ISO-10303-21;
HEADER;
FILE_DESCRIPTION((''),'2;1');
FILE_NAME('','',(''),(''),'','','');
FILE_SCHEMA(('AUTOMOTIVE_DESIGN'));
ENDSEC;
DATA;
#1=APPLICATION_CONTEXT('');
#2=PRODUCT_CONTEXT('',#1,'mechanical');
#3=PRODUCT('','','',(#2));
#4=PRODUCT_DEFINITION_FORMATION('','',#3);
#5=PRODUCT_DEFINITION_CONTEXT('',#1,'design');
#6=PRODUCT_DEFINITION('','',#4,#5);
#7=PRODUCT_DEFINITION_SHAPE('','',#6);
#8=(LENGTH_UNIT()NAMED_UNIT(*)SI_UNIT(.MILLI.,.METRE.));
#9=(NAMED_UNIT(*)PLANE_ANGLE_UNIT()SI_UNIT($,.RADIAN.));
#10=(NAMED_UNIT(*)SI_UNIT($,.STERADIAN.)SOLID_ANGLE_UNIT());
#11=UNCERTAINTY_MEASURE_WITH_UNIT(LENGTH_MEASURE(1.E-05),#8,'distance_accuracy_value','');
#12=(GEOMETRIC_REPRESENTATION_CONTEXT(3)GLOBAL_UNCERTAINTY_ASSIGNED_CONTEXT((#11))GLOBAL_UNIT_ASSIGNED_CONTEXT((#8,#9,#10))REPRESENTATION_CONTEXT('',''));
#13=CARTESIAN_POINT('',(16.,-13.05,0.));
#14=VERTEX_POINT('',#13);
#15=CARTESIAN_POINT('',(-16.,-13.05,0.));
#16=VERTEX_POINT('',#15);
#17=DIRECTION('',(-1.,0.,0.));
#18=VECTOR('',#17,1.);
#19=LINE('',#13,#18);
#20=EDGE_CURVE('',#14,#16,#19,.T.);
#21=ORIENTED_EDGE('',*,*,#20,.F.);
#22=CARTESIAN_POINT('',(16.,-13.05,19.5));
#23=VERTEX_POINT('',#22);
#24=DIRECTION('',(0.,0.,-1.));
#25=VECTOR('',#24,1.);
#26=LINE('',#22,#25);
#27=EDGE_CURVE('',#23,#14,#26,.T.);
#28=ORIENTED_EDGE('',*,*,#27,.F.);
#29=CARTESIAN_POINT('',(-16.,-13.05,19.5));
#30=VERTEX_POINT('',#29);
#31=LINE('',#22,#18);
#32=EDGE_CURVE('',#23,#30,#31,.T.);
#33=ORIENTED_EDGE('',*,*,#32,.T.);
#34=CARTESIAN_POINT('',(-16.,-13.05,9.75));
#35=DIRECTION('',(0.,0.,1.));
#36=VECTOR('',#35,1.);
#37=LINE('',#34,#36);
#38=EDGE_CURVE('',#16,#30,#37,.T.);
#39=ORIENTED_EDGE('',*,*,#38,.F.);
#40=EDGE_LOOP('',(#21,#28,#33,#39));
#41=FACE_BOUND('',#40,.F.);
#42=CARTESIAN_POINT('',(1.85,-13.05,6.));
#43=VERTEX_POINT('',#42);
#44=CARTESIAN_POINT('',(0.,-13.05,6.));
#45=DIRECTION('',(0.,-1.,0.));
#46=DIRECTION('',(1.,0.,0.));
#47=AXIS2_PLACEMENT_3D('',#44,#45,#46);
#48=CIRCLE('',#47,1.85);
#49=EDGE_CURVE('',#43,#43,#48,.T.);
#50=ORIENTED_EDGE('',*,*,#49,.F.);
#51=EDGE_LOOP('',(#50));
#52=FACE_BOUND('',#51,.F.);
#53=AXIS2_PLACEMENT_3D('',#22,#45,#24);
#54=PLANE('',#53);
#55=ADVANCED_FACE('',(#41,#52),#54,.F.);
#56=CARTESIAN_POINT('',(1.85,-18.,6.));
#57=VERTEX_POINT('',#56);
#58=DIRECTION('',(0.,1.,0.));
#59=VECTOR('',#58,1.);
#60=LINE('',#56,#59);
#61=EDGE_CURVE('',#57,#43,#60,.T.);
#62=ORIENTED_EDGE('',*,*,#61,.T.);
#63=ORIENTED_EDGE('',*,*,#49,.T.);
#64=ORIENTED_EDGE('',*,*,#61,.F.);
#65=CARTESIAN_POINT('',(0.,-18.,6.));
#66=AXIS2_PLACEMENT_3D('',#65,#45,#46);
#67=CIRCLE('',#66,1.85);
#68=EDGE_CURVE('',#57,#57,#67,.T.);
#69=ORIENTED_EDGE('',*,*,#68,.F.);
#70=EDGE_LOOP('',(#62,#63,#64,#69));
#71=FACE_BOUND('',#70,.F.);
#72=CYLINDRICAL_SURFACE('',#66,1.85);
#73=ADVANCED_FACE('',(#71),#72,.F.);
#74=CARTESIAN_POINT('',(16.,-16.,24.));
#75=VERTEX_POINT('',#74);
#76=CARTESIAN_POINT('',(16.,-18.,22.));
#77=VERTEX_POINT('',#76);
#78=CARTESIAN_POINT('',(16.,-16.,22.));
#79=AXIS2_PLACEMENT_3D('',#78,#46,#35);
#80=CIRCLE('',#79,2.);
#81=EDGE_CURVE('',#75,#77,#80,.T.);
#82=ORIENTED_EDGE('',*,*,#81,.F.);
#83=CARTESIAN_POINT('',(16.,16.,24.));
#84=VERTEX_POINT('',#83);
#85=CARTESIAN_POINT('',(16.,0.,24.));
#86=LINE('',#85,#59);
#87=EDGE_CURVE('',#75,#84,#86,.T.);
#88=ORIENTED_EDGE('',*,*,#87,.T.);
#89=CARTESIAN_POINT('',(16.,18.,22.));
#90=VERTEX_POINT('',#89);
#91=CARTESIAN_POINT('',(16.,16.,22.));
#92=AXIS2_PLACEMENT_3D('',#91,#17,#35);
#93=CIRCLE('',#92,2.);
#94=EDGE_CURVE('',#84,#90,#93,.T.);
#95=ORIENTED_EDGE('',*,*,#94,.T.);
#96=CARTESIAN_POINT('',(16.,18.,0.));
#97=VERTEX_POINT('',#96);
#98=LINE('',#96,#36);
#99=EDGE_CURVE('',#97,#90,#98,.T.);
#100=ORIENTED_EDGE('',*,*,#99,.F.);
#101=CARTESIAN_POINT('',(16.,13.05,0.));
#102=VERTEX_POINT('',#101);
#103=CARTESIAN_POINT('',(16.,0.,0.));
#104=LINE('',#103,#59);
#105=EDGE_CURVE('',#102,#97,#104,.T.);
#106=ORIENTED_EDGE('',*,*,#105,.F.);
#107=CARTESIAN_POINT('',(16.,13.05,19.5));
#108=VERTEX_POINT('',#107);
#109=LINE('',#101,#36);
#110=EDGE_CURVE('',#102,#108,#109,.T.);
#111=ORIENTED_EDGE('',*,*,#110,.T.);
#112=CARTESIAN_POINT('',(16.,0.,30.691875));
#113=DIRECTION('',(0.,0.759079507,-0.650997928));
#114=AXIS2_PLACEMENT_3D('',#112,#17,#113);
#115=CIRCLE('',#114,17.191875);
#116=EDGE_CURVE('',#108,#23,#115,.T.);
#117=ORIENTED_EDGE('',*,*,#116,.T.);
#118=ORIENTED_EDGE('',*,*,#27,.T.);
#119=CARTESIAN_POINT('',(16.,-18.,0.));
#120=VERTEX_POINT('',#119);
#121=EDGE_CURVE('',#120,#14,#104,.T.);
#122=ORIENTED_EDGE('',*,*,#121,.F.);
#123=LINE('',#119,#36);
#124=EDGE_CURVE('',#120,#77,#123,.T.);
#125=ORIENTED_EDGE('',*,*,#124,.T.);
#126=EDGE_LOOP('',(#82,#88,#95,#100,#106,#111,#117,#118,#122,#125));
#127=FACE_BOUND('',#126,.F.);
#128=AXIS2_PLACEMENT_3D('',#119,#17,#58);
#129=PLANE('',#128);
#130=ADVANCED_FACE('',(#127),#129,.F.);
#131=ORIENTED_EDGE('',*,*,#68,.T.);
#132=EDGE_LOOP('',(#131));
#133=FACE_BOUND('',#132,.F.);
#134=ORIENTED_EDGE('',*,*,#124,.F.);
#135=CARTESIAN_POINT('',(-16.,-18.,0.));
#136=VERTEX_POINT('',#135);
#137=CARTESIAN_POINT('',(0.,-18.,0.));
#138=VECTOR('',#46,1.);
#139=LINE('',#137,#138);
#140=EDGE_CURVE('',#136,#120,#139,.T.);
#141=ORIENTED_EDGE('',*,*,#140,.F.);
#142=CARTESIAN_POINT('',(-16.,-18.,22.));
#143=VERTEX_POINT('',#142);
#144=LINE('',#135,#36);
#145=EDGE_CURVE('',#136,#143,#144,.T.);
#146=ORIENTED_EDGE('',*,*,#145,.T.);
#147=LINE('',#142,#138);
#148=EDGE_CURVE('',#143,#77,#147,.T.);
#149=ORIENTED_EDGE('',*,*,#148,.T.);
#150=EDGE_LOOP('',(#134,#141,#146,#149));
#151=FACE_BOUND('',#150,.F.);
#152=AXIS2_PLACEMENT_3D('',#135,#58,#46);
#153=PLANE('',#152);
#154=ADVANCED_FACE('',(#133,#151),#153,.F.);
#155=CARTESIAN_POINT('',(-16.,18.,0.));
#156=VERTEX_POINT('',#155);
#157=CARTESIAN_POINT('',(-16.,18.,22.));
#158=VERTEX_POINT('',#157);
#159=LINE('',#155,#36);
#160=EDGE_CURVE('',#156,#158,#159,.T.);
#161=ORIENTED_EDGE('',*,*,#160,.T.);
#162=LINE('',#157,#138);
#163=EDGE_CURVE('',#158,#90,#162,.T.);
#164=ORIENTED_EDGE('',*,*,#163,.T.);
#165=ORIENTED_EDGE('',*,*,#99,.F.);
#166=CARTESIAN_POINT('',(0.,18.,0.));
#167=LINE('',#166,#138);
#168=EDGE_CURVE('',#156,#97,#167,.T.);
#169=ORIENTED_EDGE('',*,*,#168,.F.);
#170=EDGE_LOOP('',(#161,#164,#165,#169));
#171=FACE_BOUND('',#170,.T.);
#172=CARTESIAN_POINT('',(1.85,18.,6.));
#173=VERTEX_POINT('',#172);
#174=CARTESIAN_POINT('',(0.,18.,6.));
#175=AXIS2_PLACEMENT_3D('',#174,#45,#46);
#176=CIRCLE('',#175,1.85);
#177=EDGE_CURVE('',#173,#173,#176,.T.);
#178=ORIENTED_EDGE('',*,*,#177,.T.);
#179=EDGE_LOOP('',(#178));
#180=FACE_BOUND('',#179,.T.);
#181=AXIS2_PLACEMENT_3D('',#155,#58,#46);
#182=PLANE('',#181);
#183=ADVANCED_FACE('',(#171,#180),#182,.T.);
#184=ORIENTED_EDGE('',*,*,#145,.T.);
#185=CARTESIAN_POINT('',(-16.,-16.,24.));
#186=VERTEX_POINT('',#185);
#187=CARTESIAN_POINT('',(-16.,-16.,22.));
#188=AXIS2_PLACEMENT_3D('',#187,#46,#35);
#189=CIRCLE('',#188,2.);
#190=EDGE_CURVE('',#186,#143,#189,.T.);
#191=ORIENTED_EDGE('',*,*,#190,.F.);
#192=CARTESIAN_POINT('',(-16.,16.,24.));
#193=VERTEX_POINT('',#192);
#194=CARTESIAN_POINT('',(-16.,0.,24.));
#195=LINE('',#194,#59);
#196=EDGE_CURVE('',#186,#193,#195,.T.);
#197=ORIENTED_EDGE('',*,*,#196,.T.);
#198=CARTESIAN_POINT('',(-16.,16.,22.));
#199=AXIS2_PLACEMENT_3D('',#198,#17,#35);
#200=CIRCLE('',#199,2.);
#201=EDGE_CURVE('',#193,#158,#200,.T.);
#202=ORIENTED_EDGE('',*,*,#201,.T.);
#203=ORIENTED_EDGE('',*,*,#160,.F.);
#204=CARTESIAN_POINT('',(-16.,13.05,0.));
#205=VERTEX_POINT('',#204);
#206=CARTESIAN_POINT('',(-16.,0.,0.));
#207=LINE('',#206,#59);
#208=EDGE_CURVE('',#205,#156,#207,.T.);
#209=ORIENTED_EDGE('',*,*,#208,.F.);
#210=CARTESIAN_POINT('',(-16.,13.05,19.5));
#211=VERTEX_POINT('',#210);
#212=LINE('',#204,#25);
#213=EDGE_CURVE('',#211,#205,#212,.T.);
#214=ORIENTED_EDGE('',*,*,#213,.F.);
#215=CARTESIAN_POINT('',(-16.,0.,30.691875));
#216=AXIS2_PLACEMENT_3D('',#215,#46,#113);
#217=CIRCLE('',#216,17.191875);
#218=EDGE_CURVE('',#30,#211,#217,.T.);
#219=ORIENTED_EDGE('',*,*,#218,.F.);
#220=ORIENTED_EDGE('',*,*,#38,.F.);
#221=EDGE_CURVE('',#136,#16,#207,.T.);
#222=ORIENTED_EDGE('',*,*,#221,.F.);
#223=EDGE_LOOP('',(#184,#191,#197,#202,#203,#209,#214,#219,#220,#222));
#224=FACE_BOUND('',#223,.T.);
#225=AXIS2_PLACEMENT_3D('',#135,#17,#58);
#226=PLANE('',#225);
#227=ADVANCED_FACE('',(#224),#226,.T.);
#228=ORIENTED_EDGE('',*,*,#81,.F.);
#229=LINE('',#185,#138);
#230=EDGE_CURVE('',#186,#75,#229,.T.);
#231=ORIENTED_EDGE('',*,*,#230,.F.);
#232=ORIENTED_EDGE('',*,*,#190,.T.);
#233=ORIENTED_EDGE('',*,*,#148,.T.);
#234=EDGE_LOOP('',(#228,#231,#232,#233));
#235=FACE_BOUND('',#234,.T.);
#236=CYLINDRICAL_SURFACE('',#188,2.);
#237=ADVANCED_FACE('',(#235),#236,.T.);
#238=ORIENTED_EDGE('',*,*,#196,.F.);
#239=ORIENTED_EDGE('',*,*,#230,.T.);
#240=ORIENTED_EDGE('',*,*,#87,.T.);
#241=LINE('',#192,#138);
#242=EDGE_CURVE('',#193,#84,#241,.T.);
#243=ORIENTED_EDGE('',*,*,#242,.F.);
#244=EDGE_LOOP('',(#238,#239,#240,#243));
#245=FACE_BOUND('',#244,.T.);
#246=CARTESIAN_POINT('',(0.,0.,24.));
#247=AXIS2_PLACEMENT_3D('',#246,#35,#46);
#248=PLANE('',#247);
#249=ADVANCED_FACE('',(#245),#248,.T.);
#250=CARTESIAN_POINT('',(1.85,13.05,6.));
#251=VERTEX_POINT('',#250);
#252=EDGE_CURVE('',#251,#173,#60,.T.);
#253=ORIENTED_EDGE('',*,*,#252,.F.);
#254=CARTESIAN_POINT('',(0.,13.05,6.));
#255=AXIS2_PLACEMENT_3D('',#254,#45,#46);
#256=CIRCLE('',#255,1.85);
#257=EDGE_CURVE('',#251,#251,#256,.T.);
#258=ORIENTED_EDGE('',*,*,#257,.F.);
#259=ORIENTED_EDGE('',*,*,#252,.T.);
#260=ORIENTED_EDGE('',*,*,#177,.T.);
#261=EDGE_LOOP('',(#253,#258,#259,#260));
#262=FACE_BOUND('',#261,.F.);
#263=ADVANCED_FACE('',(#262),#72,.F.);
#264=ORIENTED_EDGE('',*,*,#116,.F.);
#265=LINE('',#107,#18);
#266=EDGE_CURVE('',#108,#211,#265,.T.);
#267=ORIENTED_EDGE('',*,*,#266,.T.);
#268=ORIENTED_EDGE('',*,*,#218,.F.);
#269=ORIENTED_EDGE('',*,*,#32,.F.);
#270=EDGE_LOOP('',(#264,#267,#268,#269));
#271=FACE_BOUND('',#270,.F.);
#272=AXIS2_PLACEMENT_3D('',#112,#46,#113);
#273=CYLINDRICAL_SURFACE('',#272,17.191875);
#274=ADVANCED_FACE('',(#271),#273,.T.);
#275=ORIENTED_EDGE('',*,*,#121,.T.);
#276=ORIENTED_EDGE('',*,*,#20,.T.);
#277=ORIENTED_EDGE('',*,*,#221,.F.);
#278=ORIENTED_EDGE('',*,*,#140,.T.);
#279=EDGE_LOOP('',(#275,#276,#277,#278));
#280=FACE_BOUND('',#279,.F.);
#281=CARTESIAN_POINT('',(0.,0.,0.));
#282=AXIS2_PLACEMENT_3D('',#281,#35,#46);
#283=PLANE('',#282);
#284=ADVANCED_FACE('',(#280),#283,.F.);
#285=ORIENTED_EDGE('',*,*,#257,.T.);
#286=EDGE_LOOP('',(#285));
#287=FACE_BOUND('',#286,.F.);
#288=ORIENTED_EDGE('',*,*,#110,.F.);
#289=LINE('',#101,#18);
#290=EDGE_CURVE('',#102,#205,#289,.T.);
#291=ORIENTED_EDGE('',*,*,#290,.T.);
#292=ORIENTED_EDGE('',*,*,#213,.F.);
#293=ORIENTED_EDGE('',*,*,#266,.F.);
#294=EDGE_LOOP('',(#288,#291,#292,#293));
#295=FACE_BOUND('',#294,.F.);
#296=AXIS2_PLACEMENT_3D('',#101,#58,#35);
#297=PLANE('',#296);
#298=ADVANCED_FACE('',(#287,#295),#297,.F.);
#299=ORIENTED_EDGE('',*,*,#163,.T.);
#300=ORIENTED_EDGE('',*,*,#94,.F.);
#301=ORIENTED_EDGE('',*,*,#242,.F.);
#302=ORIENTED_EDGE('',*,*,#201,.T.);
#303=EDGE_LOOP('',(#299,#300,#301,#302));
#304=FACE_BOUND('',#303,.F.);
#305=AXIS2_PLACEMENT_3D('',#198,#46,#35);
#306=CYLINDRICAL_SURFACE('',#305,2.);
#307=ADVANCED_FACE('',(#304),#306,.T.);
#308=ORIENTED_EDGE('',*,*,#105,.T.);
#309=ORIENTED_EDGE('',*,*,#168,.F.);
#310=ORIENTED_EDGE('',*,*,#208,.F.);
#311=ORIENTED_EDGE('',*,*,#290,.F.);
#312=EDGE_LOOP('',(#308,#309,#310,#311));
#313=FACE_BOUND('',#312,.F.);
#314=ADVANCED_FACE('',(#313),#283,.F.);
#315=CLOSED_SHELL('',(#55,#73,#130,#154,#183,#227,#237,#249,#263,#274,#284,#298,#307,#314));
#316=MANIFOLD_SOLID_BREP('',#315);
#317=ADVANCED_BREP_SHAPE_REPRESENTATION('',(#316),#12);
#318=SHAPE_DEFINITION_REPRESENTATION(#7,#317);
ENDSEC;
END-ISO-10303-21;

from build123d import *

# Parameters (mm, degrees)
F0_W     = 32
F0_H     = 36
F1_DEPTH = 24
F3_DEPTH = 89
F4_R     = 2
F5_R     = 2
F6_R     = 1.85
F7_DEPTH = 90


# Not quite as in the source:
# - a feature names something its author has since deleted; it is built from what else it names


with BuildPart() as f1:
    # F0 (on Top) → F1 (new body)
    with BuildSketch(Plane.XY):
        Rectangle(F0_W, F0_H)
    extrude(amount=F1_DEPTH)

    # F2 (on face) → F3 (cut)
    with BuildSketch(Plane.YZ.offset(16)):
        with BuildLine():
            ThreePointArc((13.05, 19.5), (0, 13.5), (-13.05, 19.5))
            Line((-13.05, 19.5), (-13.05, 0))
            Line((-13.05, 0), (13.05, 0))
            Line((13.05, 0), (13.05, 19.5))
        make_face()
    extrude(amount=-F3_DEPTH, mode=Mode.SUBTRACT)

    # F4
    f4_edges = [f1.edges().sort_by_distance(p)[0] for p in [
        (0, -18, 24),
    ]]
    fillet(f4_edges, radius=F4_R)

    # F5
    f5_edges = [f1.edges().sort_by_distance(p)[0] for p in [
        (0, 18, 24),
    ]]
    fillet(f5_edges, radius=F5_R)

    # F6 (on face) → F7 (cut)
    with BuildSketch(Plane.XZ.offset(18)):
        with Locations((-24, 6)):
            Circle(F6_R)
        with Locations((0, 6)):
            Circle(F6_R)
        with Locations((24, 6)):
            Circle(F6_R)
    extrude(amount=-F7_DEPTH, mode=Mode.SUBTRACT)


solid = f1.part
